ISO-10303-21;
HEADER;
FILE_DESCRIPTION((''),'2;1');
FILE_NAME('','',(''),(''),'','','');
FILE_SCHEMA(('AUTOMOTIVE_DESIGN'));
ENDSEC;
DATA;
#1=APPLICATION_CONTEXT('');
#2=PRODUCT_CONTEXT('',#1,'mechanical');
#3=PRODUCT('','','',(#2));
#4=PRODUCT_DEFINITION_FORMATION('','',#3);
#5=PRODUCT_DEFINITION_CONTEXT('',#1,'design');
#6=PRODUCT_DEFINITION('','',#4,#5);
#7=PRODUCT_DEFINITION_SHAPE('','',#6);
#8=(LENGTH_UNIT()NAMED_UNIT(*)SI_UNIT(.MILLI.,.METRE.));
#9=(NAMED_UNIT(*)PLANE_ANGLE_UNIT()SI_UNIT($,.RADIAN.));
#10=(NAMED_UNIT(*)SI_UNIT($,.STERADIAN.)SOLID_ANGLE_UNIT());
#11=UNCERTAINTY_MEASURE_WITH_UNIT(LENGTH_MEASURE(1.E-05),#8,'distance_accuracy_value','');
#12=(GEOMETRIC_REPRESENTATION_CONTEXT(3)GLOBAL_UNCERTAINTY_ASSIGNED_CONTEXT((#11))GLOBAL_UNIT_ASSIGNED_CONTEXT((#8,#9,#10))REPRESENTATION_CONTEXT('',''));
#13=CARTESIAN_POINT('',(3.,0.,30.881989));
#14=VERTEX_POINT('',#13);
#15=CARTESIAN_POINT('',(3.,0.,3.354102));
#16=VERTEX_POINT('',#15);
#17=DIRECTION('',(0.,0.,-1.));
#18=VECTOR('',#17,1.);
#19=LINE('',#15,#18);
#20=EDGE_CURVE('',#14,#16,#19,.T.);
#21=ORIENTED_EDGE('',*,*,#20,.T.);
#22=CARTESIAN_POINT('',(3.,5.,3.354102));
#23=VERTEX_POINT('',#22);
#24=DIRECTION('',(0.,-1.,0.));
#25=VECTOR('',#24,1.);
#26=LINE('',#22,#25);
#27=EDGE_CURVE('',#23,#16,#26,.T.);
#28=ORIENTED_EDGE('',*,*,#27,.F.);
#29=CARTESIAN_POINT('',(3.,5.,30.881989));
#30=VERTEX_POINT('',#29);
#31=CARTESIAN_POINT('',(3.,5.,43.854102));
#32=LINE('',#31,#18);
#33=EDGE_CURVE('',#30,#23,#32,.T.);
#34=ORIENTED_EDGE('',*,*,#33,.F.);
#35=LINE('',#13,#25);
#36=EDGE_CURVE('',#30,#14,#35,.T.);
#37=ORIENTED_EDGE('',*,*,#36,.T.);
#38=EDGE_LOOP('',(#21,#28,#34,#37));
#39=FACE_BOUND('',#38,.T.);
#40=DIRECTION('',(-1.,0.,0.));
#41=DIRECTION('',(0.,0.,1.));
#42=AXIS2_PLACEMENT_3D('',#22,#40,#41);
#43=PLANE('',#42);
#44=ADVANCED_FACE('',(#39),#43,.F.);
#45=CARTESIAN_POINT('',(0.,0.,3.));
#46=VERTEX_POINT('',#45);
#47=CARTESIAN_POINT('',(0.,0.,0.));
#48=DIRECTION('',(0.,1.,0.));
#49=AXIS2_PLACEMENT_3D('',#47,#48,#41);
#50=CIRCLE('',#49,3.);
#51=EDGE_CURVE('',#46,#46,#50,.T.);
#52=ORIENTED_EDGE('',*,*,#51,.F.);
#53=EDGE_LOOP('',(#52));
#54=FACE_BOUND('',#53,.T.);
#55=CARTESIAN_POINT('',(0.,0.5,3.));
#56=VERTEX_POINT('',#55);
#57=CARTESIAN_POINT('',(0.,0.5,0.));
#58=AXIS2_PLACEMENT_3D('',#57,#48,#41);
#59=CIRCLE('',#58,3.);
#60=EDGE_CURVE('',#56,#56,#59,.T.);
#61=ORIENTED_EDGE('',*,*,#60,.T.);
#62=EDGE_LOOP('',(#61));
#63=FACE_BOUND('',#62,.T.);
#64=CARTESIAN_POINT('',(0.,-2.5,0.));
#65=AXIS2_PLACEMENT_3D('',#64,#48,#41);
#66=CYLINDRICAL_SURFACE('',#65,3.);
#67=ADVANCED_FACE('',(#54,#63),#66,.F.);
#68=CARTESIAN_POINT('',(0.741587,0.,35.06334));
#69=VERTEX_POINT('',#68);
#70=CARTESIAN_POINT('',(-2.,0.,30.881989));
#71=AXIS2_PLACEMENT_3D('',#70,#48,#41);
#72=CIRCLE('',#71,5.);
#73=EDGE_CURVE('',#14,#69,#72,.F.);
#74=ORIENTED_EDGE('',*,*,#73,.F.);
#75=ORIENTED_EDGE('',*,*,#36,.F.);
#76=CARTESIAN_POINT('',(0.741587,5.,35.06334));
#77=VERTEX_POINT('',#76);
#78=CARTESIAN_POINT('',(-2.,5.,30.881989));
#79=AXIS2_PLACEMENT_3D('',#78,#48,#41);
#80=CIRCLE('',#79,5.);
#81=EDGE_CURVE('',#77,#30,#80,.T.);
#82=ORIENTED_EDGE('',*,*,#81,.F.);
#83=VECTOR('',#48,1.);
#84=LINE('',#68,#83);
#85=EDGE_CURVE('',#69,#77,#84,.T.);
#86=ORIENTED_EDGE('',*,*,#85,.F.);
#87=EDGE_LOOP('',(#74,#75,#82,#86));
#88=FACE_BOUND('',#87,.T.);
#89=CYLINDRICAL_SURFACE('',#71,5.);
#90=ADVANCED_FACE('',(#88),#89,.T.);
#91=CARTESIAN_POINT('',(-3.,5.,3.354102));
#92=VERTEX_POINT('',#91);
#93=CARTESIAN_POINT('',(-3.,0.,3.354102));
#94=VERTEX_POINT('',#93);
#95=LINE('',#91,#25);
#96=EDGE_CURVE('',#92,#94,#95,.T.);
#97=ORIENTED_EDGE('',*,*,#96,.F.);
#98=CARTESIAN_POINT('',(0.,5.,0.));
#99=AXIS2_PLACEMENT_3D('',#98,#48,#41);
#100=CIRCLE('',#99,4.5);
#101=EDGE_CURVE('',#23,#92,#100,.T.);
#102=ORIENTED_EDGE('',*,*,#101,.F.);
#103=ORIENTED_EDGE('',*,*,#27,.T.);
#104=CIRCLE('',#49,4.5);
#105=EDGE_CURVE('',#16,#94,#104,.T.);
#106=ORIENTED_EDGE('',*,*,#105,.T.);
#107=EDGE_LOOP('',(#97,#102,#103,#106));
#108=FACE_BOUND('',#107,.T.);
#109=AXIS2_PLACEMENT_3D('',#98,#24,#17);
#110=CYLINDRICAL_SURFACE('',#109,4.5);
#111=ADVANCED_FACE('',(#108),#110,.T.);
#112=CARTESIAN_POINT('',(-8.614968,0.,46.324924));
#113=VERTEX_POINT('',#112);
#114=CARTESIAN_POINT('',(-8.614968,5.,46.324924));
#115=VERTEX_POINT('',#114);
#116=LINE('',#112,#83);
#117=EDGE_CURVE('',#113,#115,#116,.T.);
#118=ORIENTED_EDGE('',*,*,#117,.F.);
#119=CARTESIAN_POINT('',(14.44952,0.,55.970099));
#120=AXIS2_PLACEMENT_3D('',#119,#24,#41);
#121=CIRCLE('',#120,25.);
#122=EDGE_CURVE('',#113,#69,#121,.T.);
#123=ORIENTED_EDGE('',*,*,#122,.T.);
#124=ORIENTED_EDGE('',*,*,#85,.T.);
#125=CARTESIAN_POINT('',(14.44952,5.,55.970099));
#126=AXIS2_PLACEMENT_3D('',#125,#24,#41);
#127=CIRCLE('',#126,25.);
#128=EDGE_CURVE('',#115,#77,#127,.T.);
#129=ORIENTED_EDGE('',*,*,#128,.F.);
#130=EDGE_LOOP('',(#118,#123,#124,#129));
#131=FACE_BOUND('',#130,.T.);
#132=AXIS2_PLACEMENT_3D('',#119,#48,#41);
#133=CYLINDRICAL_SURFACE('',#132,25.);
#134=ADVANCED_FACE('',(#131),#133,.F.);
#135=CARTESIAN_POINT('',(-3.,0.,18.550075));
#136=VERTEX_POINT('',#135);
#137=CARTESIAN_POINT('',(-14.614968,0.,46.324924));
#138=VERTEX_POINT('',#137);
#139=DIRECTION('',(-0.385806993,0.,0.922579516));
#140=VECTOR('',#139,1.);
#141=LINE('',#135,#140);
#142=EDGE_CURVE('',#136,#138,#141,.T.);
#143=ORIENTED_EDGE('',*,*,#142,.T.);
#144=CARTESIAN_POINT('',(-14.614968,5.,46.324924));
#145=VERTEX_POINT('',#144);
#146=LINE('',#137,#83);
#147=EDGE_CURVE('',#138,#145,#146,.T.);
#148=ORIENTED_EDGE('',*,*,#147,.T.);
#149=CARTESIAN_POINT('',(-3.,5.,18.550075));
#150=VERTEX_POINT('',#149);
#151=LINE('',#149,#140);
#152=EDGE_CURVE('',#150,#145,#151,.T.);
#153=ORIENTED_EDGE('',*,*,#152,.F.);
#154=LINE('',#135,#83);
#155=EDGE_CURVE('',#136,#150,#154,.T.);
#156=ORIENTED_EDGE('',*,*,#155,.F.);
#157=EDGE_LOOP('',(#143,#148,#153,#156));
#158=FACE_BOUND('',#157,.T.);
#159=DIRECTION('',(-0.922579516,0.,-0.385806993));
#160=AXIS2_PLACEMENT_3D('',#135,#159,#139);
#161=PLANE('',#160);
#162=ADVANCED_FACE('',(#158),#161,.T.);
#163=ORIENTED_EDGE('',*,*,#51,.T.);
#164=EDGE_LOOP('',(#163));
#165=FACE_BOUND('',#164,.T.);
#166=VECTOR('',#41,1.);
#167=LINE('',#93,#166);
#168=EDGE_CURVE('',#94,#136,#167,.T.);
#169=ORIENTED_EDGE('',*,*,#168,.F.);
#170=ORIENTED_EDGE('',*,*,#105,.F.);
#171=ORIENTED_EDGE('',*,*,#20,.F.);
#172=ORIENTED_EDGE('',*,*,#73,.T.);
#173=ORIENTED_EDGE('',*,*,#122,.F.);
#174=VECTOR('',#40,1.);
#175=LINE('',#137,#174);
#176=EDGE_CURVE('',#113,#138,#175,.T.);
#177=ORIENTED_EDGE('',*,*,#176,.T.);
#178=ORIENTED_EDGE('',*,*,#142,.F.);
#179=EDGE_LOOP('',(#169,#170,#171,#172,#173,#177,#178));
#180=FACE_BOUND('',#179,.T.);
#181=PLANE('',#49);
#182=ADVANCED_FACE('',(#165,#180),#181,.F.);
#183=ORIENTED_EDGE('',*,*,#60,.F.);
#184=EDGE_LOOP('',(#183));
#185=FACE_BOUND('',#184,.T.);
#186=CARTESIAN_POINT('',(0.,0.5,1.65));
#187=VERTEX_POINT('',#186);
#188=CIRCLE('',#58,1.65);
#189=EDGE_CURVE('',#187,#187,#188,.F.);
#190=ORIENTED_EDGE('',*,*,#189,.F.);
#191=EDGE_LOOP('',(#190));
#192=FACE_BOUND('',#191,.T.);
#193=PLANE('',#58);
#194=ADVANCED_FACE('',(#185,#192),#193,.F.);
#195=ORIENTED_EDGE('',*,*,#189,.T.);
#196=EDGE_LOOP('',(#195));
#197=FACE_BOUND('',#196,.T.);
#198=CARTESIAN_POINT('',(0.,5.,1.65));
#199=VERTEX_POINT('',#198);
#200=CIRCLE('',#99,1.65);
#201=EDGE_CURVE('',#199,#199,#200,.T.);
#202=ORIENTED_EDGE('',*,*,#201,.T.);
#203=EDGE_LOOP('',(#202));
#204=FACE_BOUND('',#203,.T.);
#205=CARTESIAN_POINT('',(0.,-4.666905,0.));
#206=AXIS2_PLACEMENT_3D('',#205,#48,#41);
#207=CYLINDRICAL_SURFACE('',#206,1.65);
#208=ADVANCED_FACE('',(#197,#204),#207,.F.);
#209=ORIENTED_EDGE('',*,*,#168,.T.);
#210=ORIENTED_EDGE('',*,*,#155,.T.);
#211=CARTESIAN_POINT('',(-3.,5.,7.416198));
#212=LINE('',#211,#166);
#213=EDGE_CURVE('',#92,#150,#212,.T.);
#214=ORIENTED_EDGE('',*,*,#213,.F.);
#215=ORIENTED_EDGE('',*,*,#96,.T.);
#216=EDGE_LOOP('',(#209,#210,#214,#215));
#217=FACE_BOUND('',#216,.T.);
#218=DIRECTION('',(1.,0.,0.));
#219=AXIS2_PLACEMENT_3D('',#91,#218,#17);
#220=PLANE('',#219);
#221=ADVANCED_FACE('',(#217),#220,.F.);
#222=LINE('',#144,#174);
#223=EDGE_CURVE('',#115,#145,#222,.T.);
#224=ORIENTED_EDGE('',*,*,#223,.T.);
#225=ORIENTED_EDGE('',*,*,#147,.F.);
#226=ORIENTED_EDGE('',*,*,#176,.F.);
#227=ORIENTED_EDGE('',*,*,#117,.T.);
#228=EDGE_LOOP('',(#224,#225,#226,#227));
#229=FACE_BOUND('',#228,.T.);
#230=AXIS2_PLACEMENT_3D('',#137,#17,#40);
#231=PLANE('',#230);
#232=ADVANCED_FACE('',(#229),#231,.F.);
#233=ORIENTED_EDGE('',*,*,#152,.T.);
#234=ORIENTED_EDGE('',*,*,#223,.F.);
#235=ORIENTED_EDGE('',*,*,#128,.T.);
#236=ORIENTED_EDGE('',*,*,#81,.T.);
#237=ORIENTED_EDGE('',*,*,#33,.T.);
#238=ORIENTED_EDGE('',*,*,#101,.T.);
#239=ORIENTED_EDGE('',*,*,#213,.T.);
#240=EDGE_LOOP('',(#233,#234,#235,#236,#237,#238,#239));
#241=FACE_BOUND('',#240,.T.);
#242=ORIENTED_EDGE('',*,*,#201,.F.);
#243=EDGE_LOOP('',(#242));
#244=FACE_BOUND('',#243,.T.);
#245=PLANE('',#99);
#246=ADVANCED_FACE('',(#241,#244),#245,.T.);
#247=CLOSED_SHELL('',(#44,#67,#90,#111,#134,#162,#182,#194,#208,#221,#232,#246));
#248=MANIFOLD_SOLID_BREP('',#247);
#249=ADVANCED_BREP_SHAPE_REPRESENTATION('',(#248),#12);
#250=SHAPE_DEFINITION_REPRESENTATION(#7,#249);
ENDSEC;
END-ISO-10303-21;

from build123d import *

# Parameters (mm, degrees)
EXTRUDE_2_DEPTH     = 5
SKETCH_4_R          = 1.65
CUT_EXTRUDE_1_DEPTH = 5
EXTRUDE_3_DEPTH     = 5
CUT_EXTRUDE_START   = -4.5
SKETCH_7_R          = 3
CUT_EXTRUDE_2_DEPTH = 3
CUT_EXTRUDE_3_DEPTH = 7.5
EXTRUDE_4_DEPTH     = 5
FILLET_1_R          = 5
FILLET_2_R          = 5
CUT_EXTRUDE_4_DEPTH = 5


with BuildPart() as part:
    # 草图3 → 凸台-拉伸2 (new body)
    with BuildSketch(Plane(origin=(0, 0, 0), x_dir=(1, 0, 0), z_dir=(0, 1, 0))):
        with BuildLine():
            Line((-3, -3.354101966), (-3, -7.416198487))
            Line((-3, -7.416198487), (-3, -43.854101966))
            Line((-3, -43.854101966), (3, -43.854101966))
            Line((3, -43.854101966), (3, -10.583005244))
            Line((3, -10.583005244), (3, -7.416198487))
            Line((3, -7.416198487), (3, -3.354101966))
            ThreePointArc((3, -3.354101966), (0, 4.5), (-3, -3.354101966))
        make_face()
    extrude(amount=EXTRUDE_2_DEPTH)

    # 草图4 → 切除-拉伸1 (cut)
    with BuildSketch(Plane(origin=(0, 5, 0), x_dir=(1, 0, 0), z_dir=(0, 1, 0))):
        with Locations(Location((0, 0, 0), (0, 0, 270))):
            Circle(SKETCH_4_R)
    extrude(amount=-CUT_EXTRUDE_1_DEPTH, mode=Mode.SUBTRACT)

    # 草图6 → 凸台-拉伸3 (add)
    with BuildSketch(Plane(origin=(0, 5, 0), x_dir=(1, 0, 0), z_dir=(0, 1, 0))):
        with BuildLine():
            Line((3, -33.74604712), (-3, -33.74604712))
            ThreePointArc((-3, -33.74604712), (-16.46902092, -57.986607816), (0.722500961, -79.745993902))
            Line((0.722500961, -79.745993902), (1.949520222, -77.620734201))
            ThreePointArc((1.949520222, -77.620734201), (-10.543317179, -55.371702353), (3, -33.74604712))
        make_face()
    extrude(amount=-EXTRUDE_3_DEPTH)

    # 草图7 → 切除-拉伸2 (cut)
    with BuildSketch(Plane(origin=(0, 5, 0), x_dir=(1, 0, 0), z_dir=(0, 1, 0)).offset(CUT_EXTRUDE_START)):
        with Locations(Location((0, 0, 0), (0, 0, 270))):
            Circle(SKETCH_7_R)
    extrude(amount=-CUT_EXTRUDE_2_DEPTH, mode=Mode.SUBTRACT)

    # 草图8 → 切除-拉伸3 (cut)
    with BuildSketch(Plane(origin=(0, 5, 0), x_dir=(1, 0, 0), z_dir=(0, 1, 0))):
        with BuildLine():
            Line((-3, -38.067187498), (-3, -43.854101966))
            Line((-3, -43.854101966), (3, -43.854101966))
            Line((3, -43.854101966), (3, -33.74604712))
            ThreePointArc((3, -33.74604712), (-0.160637142, -35.683569047), (-3, -38.067187498))
        make_face()
    extrude(amount=-CUT_EXTRUDE_3_DEPTH, mode=Mode.SUBTRACT)

    # 草图9 → 凸台-拉伸4 (add)
    with BuildSketch(Plane(origin=(0, 5, 0), x_dir=(1, 0, 0), z_dir=(0, 1, 0))):
        with BuildLine():
            Line((-3, -18.550074543), (-14.614967684, -46.324924269))
            ThreePointArc((-14.614967684, -46.324924269), (-9.917875534, -39.010182445), (-3, -33.74604712))
            Line((-3, -33.74604712), (-3, -18.550074543))
        make_face()
    extrude(amount=-EXTRUDE_4_DEPTH)

    # 圆角1
    fillet_1_edges = [part.edges().sort_by_distance(p)[0] for p in [
        (3, 2.5, 33.74604712),
    ]]
    fillet(fillet_1_edges, radius=FILLET_1_R)

    # 圆角2
    # the kernel refuses this fillet: 5 mm, written as the material it takes off along each edge
    with BuildSketch(Plane(origin=(1.949520222, 14.371610933, 77.620734201), x_dir=(-0.8261015944022844, 0, -0.5635212114250925), z_dir=(0, -1, 0))) as fillet_2_piece_1:
        with BuildLine():
            CenterArc((4.123508811, -4.985927863), FILLET_2_R, 94.299664485, 55.185648669)
            Line((-0.183986354, -2.447131808), (-0.270136257, -2.396355887))
            ThreePointArc((-0.270136257, -2.396355887), (-0.191711734, -1.216068615), (-0.099718557, 0.007497289))
            Line((-0.099718557, 0.007497289), (0.007497289, 0.099718557))
            ThreePointArc((0.007497289, 0.099718557), (1.874322187, 0.029639314), (3.741147084, 0.099718557))
            Line((3.741147084, 0.099718557), (3.748644373, 0))
        make_face()
    extrude(amount=23.743221866, mode=Mode.SUBTRACT)

    # 草图10 → 切除-拉伸4 (cut)
    with BuildSketch(Plane(origin=(0, 5, 0), x_dir=(1, 0, 0), z_dir=(0, 1, 0))):
        with BuildLine():
            Line((-14.614967684, -46.324924269), (-8.614967684, -46.324924269))
            ThreePointArc((-8.614967684, -46.324924269), (-9.770106213, -62.167654699), (-1.147240872, -75.508293582))
            ThreePointArc((-1.147240872, -75.508293582), (0.307928877, -77.397579493), (0.722500961, -79.745993902))
            ThreePointArc((0.722500961, -79.745993902), (-14.272081884, -66.397409294), (-14.614967684, -46.324924269))
        make_face()
    extrude(amount=-CUT_EXTRUDE_4_DEPTH, mode=Mode.SUBTRACT)


solid = part.part
